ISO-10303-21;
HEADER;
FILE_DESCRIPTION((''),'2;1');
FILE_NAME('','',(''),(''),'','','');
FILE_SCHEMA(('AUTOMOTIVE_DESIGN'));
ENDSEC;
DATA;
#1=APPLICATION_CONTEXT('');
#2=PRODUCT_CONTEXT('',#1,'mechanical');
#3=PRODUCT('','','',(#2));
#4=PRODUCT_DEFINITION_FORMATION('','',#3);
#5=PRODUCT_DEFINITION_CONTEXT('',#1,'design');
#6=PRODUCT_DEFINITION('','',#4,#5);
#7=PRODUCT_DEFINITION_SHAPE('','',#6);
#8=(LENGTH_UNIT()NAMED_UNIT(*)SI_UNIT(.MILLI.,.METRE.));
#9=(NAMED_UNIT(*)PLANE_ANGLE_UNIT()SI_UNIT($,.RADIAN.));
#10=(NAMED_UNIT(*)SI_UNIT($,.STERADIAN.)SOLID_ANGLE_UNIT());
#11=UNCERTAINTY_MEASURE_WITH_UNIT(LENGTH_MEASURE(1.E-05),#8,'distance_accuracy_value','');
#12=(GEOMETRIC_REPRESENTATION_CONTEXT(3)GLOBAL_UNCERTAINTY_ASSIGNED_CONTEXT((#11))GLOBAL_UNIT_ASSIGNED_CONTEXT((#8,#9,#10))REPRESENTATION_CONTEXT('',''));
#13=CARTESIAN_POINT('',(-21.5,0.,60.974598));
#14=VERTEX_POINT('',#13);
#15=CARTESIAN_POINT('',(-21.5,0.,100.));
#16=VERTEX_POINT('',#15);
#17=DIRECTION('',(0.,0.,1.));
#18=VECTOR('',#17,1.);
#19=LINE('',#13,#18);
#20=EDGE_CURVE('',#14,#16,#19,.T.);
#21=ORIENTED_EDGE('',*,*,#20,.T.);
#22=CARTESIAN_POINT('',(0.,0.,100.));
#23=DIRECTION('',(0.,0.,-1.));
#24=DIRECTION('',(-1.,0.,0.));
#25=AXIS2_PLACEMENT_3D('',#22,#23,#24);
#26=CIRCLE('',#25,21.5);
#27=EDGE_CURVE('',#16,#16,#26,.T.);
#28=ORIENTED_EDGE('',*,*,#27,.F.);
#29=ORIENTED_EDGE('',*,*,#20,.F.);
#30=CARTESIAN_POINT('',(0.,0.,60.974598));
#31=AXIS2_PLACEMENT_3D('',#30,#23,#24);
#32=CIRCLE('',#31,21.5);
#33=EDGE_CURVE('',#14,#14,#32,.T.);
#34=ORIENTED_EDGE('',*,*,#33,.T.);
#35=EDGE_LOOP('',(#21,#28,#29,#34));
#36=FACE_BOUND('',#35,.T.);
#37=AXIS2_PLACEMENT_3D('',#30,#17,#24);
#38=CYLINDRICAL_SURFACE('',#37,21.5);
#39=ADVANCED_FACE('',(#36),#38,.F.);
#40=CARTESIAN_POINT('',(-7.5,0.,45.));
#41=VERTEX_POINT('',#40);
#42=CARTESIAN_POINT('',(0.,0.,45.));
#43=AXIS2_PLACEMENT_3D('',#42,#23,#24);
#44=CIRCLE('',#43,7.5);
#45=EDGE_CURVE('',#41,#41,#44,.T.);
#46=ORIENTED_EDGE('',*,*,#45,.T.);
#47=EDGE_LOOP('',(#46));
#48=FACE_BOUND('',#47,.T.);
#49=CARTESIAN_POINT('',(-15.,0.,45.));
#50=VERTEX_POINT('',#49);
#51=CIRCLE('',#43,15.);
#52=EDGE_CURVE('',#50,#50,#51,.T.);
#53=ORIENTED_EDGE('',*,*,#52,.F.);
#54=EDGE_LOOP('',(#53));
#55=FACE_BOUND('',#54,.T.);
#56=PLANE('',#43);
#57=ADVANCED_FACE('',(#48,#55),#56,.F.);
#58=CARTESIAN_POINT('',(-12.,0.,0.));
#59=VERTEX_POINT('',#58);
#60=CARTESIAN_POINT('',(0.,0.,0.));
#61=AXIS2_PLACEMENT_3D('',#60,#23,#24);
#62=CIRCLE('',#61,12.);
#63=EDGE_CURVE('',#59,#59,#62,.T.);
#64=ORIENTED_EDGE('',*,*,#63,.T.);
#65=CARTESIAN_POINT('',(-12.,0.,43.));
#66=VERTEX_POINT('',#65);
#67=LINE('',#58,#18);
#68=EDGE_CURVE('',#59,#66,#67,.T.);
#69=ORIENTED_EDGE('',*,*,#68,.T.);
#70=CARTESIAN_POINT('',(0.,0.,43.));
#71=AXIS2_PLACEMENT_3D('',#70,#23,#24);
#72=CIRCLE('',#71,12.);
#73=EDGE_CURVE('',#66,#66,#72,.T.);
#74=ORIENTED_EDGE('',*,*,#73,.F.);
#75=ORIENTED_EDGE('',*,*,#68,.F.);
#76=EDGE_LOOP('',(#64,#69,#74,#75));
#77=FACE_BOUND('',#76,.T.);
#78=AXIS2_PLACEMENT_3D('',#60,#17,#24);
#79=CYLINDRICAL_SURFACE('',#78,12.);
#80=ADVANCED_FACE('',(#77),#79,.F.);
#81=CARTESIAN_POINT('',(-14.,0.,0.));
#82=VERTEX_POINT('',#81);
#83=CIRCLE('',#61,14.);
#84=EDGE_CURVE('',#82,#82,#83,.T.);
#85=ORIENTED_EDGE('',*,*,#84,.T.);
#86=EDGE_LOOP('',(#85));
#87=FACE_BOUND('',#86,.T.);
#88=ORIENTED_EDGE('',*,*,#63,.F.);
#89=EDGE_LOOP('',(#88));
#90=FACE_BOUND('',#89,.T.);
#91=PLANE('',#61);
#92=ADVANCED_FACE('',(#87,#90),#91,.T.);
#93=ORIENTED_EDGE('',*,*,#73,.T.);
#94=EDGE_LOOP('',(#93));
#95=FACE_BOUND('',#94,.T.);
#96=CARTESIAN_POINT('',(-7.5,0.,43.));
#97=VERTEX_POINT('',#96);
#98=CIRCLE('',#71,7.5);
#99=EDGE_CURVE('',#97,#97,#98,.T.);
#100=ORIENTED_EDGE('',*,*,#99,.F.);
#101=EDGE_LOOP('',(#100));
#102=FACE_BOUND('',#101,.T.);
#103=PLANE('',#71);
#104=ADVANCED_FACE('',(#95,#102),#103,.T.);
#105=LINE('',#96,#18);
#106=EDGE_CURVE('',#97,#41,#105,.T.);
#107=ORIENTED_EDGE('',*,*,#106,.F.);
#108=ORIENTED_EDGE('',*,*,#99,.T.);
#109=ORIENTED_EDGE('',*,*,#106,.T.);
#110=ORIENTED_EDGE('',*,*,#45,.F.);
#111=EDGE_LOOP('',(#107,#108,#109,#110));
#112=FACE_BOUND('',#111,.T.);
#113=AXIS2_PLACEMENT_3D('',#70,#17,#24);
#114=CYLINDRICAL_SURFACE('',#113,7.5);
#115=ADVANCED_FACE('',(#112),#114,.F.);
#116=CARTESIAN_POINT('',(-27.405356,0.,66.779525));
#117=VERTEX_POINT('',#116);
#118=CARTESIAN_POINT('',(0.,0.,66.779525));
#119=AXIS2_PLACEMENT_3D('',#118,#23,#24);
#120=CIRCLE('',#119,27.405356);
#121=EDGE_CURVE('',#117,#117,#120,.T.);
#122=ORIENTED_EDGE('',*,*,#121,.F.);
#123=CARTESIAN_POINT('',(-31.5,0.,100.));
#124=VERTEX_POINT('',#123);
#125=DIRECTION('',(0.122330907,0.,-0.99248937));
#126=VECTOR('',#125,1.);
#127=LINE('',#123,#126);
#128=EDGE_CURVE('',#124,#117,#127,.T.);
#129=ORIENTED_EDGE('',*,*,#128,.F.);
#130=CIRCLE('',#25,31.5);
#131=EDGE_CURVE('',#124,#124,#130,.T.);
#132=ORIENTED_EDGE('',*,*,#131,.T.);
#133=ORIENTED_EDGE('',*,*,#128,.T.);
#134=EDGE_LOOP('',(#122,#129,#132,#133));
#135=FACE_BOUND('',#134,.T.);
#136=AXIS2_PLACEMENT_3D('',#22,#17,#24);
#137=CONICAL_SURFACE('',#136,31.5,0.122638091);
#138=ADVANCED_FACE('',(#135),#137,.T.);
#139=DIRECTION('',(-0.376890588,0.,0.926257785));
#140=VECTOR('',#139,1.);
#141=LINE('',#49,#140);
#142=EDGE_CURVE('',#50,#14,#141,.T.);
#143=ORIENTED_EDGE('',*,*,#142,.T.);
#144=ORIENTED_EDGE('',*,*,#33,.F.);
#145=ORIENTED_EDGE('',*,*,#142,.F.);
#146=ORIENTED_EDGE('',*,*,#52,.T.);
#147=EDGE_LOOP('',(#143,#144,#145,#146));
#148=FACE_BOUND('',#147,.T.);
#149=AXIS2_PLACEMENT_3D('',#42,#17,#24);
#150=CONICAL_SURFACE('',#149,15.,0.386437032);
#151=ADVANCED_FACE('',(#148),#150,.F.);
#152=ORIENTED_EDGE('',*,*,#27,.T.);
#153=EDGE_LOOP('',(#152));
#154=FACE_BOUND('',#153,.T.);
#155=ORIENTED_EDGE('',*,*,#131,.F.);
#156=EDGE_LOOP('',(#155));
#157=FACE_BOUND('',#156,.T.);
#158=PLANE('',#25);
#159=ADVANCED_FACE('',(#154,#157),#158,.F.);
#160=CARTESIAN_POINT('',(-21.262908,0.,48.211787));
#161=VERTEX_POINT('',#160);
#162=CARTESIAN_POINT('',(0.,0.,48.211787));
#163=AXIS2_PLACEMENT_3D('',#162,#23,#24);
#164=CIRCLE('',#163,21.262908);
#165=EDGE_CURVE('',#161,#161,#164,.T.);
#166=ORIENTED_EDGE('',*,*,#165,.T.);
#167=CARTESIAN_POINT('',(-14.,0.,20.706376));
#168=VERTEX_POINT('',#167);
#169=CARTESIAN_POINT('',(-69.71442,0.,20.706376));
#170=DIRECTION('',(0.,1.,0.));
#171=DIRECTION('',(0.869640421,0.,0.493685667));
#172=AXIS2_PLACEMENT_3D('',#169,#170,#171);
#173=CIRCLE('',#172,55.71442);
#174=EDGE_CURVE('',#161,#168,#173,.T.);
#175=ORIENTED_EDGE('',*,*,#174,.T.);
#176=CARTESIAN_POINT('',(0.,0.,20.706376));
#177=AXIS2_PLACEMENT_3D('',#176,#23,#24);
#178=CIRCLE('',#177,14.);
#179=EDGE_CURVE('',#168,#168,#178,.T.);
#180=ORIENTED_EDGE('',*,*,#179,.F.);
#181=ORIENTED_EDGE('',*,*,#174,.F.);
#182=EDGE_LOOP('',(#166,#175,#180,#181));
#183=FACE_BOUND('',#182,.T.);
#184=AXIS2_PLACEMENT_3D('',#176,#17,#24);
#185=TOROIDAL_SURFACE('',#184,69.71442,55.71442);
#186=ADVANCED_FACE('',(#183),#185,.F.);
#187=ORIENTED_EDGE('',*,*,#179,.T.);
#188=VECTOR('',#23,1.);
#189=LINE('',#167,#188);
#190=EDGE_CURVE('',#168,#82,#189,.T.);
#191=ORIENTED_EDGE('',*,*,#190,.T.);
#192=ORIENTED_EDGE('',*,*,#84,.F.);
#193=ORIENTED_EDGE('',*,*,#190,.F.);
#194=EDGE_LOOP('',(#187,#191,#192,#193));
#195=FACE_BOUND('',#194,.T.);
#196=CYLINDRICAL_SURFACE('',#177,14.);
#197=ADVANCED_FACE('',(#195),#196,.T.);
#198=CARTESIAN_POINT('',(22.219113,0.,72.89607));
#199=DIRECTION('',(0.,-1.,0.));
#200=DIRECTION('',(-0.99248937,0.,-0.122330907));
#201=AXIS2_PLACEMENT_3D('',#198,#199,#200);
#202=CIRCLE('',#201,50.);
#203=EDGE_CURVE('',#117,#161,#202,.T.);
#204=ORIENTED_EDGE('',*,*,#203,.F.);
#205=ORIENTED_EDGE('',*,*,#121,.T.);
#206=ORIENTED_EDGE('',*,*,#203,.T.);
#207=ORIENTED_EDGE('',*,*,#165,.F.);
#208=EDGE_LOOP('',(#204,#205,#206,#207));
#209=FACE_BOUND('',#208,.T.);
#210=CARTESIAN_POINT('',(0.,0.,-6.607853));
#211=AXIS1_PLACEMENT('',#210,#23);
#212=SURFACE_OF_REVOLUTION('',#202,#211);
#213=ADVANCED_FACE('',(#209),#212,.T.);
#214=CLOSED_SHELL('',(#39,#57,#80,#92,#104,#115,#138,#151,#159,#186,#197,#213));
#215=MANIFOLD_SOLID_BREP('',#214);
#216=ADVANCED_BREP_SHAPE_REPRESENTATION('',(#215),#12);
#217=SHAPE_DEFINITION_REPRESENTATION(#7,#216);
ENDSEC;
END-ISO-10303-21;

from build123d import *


# Not quite as in the source:
# - a feature names something its author has since deleted; it is built from what else it names


with BuildPart() as f1:
    # F0 (on Front) → F1 (revolve)
    with BuildSketch(Plane.XZ):
        with BuildLine():
            ThreePointArc((-21.2629083544, 48.211786896), (-15.8463196743, 34.9304531122), (-14, 20.7063762118))
            Line((-14, 20.7063762118), (-14, 0))
            Line((-14, 0), (-12, 0))
            Line((-12, 0), (-12, 43))
            Line((-12, 43), (-7.5, 43))
            Line((-7.5, 43), (-7.5, 45))
            Line((-7.5, 45), (-15, 45))
            Line((-15, 45), (-21.5, 60.9745979309))
            Line((-21.5, 60.9745979309), (-21.5, 100))
            Line((-21.5, 100), (-31.5, 100))
            Line((-31.5, 100), (-27.405355799, 66.7795249261))
            ThreePointArc((-27.405355799, 66.7795249261), (-25.2508232926, 57.1924026226), (-21.2629083544, 48.211786896))
        make_face()
    revolve(axis=Axis((0, 0, -6.6078525846), (0, 0, -1)))


solid = f1.part
